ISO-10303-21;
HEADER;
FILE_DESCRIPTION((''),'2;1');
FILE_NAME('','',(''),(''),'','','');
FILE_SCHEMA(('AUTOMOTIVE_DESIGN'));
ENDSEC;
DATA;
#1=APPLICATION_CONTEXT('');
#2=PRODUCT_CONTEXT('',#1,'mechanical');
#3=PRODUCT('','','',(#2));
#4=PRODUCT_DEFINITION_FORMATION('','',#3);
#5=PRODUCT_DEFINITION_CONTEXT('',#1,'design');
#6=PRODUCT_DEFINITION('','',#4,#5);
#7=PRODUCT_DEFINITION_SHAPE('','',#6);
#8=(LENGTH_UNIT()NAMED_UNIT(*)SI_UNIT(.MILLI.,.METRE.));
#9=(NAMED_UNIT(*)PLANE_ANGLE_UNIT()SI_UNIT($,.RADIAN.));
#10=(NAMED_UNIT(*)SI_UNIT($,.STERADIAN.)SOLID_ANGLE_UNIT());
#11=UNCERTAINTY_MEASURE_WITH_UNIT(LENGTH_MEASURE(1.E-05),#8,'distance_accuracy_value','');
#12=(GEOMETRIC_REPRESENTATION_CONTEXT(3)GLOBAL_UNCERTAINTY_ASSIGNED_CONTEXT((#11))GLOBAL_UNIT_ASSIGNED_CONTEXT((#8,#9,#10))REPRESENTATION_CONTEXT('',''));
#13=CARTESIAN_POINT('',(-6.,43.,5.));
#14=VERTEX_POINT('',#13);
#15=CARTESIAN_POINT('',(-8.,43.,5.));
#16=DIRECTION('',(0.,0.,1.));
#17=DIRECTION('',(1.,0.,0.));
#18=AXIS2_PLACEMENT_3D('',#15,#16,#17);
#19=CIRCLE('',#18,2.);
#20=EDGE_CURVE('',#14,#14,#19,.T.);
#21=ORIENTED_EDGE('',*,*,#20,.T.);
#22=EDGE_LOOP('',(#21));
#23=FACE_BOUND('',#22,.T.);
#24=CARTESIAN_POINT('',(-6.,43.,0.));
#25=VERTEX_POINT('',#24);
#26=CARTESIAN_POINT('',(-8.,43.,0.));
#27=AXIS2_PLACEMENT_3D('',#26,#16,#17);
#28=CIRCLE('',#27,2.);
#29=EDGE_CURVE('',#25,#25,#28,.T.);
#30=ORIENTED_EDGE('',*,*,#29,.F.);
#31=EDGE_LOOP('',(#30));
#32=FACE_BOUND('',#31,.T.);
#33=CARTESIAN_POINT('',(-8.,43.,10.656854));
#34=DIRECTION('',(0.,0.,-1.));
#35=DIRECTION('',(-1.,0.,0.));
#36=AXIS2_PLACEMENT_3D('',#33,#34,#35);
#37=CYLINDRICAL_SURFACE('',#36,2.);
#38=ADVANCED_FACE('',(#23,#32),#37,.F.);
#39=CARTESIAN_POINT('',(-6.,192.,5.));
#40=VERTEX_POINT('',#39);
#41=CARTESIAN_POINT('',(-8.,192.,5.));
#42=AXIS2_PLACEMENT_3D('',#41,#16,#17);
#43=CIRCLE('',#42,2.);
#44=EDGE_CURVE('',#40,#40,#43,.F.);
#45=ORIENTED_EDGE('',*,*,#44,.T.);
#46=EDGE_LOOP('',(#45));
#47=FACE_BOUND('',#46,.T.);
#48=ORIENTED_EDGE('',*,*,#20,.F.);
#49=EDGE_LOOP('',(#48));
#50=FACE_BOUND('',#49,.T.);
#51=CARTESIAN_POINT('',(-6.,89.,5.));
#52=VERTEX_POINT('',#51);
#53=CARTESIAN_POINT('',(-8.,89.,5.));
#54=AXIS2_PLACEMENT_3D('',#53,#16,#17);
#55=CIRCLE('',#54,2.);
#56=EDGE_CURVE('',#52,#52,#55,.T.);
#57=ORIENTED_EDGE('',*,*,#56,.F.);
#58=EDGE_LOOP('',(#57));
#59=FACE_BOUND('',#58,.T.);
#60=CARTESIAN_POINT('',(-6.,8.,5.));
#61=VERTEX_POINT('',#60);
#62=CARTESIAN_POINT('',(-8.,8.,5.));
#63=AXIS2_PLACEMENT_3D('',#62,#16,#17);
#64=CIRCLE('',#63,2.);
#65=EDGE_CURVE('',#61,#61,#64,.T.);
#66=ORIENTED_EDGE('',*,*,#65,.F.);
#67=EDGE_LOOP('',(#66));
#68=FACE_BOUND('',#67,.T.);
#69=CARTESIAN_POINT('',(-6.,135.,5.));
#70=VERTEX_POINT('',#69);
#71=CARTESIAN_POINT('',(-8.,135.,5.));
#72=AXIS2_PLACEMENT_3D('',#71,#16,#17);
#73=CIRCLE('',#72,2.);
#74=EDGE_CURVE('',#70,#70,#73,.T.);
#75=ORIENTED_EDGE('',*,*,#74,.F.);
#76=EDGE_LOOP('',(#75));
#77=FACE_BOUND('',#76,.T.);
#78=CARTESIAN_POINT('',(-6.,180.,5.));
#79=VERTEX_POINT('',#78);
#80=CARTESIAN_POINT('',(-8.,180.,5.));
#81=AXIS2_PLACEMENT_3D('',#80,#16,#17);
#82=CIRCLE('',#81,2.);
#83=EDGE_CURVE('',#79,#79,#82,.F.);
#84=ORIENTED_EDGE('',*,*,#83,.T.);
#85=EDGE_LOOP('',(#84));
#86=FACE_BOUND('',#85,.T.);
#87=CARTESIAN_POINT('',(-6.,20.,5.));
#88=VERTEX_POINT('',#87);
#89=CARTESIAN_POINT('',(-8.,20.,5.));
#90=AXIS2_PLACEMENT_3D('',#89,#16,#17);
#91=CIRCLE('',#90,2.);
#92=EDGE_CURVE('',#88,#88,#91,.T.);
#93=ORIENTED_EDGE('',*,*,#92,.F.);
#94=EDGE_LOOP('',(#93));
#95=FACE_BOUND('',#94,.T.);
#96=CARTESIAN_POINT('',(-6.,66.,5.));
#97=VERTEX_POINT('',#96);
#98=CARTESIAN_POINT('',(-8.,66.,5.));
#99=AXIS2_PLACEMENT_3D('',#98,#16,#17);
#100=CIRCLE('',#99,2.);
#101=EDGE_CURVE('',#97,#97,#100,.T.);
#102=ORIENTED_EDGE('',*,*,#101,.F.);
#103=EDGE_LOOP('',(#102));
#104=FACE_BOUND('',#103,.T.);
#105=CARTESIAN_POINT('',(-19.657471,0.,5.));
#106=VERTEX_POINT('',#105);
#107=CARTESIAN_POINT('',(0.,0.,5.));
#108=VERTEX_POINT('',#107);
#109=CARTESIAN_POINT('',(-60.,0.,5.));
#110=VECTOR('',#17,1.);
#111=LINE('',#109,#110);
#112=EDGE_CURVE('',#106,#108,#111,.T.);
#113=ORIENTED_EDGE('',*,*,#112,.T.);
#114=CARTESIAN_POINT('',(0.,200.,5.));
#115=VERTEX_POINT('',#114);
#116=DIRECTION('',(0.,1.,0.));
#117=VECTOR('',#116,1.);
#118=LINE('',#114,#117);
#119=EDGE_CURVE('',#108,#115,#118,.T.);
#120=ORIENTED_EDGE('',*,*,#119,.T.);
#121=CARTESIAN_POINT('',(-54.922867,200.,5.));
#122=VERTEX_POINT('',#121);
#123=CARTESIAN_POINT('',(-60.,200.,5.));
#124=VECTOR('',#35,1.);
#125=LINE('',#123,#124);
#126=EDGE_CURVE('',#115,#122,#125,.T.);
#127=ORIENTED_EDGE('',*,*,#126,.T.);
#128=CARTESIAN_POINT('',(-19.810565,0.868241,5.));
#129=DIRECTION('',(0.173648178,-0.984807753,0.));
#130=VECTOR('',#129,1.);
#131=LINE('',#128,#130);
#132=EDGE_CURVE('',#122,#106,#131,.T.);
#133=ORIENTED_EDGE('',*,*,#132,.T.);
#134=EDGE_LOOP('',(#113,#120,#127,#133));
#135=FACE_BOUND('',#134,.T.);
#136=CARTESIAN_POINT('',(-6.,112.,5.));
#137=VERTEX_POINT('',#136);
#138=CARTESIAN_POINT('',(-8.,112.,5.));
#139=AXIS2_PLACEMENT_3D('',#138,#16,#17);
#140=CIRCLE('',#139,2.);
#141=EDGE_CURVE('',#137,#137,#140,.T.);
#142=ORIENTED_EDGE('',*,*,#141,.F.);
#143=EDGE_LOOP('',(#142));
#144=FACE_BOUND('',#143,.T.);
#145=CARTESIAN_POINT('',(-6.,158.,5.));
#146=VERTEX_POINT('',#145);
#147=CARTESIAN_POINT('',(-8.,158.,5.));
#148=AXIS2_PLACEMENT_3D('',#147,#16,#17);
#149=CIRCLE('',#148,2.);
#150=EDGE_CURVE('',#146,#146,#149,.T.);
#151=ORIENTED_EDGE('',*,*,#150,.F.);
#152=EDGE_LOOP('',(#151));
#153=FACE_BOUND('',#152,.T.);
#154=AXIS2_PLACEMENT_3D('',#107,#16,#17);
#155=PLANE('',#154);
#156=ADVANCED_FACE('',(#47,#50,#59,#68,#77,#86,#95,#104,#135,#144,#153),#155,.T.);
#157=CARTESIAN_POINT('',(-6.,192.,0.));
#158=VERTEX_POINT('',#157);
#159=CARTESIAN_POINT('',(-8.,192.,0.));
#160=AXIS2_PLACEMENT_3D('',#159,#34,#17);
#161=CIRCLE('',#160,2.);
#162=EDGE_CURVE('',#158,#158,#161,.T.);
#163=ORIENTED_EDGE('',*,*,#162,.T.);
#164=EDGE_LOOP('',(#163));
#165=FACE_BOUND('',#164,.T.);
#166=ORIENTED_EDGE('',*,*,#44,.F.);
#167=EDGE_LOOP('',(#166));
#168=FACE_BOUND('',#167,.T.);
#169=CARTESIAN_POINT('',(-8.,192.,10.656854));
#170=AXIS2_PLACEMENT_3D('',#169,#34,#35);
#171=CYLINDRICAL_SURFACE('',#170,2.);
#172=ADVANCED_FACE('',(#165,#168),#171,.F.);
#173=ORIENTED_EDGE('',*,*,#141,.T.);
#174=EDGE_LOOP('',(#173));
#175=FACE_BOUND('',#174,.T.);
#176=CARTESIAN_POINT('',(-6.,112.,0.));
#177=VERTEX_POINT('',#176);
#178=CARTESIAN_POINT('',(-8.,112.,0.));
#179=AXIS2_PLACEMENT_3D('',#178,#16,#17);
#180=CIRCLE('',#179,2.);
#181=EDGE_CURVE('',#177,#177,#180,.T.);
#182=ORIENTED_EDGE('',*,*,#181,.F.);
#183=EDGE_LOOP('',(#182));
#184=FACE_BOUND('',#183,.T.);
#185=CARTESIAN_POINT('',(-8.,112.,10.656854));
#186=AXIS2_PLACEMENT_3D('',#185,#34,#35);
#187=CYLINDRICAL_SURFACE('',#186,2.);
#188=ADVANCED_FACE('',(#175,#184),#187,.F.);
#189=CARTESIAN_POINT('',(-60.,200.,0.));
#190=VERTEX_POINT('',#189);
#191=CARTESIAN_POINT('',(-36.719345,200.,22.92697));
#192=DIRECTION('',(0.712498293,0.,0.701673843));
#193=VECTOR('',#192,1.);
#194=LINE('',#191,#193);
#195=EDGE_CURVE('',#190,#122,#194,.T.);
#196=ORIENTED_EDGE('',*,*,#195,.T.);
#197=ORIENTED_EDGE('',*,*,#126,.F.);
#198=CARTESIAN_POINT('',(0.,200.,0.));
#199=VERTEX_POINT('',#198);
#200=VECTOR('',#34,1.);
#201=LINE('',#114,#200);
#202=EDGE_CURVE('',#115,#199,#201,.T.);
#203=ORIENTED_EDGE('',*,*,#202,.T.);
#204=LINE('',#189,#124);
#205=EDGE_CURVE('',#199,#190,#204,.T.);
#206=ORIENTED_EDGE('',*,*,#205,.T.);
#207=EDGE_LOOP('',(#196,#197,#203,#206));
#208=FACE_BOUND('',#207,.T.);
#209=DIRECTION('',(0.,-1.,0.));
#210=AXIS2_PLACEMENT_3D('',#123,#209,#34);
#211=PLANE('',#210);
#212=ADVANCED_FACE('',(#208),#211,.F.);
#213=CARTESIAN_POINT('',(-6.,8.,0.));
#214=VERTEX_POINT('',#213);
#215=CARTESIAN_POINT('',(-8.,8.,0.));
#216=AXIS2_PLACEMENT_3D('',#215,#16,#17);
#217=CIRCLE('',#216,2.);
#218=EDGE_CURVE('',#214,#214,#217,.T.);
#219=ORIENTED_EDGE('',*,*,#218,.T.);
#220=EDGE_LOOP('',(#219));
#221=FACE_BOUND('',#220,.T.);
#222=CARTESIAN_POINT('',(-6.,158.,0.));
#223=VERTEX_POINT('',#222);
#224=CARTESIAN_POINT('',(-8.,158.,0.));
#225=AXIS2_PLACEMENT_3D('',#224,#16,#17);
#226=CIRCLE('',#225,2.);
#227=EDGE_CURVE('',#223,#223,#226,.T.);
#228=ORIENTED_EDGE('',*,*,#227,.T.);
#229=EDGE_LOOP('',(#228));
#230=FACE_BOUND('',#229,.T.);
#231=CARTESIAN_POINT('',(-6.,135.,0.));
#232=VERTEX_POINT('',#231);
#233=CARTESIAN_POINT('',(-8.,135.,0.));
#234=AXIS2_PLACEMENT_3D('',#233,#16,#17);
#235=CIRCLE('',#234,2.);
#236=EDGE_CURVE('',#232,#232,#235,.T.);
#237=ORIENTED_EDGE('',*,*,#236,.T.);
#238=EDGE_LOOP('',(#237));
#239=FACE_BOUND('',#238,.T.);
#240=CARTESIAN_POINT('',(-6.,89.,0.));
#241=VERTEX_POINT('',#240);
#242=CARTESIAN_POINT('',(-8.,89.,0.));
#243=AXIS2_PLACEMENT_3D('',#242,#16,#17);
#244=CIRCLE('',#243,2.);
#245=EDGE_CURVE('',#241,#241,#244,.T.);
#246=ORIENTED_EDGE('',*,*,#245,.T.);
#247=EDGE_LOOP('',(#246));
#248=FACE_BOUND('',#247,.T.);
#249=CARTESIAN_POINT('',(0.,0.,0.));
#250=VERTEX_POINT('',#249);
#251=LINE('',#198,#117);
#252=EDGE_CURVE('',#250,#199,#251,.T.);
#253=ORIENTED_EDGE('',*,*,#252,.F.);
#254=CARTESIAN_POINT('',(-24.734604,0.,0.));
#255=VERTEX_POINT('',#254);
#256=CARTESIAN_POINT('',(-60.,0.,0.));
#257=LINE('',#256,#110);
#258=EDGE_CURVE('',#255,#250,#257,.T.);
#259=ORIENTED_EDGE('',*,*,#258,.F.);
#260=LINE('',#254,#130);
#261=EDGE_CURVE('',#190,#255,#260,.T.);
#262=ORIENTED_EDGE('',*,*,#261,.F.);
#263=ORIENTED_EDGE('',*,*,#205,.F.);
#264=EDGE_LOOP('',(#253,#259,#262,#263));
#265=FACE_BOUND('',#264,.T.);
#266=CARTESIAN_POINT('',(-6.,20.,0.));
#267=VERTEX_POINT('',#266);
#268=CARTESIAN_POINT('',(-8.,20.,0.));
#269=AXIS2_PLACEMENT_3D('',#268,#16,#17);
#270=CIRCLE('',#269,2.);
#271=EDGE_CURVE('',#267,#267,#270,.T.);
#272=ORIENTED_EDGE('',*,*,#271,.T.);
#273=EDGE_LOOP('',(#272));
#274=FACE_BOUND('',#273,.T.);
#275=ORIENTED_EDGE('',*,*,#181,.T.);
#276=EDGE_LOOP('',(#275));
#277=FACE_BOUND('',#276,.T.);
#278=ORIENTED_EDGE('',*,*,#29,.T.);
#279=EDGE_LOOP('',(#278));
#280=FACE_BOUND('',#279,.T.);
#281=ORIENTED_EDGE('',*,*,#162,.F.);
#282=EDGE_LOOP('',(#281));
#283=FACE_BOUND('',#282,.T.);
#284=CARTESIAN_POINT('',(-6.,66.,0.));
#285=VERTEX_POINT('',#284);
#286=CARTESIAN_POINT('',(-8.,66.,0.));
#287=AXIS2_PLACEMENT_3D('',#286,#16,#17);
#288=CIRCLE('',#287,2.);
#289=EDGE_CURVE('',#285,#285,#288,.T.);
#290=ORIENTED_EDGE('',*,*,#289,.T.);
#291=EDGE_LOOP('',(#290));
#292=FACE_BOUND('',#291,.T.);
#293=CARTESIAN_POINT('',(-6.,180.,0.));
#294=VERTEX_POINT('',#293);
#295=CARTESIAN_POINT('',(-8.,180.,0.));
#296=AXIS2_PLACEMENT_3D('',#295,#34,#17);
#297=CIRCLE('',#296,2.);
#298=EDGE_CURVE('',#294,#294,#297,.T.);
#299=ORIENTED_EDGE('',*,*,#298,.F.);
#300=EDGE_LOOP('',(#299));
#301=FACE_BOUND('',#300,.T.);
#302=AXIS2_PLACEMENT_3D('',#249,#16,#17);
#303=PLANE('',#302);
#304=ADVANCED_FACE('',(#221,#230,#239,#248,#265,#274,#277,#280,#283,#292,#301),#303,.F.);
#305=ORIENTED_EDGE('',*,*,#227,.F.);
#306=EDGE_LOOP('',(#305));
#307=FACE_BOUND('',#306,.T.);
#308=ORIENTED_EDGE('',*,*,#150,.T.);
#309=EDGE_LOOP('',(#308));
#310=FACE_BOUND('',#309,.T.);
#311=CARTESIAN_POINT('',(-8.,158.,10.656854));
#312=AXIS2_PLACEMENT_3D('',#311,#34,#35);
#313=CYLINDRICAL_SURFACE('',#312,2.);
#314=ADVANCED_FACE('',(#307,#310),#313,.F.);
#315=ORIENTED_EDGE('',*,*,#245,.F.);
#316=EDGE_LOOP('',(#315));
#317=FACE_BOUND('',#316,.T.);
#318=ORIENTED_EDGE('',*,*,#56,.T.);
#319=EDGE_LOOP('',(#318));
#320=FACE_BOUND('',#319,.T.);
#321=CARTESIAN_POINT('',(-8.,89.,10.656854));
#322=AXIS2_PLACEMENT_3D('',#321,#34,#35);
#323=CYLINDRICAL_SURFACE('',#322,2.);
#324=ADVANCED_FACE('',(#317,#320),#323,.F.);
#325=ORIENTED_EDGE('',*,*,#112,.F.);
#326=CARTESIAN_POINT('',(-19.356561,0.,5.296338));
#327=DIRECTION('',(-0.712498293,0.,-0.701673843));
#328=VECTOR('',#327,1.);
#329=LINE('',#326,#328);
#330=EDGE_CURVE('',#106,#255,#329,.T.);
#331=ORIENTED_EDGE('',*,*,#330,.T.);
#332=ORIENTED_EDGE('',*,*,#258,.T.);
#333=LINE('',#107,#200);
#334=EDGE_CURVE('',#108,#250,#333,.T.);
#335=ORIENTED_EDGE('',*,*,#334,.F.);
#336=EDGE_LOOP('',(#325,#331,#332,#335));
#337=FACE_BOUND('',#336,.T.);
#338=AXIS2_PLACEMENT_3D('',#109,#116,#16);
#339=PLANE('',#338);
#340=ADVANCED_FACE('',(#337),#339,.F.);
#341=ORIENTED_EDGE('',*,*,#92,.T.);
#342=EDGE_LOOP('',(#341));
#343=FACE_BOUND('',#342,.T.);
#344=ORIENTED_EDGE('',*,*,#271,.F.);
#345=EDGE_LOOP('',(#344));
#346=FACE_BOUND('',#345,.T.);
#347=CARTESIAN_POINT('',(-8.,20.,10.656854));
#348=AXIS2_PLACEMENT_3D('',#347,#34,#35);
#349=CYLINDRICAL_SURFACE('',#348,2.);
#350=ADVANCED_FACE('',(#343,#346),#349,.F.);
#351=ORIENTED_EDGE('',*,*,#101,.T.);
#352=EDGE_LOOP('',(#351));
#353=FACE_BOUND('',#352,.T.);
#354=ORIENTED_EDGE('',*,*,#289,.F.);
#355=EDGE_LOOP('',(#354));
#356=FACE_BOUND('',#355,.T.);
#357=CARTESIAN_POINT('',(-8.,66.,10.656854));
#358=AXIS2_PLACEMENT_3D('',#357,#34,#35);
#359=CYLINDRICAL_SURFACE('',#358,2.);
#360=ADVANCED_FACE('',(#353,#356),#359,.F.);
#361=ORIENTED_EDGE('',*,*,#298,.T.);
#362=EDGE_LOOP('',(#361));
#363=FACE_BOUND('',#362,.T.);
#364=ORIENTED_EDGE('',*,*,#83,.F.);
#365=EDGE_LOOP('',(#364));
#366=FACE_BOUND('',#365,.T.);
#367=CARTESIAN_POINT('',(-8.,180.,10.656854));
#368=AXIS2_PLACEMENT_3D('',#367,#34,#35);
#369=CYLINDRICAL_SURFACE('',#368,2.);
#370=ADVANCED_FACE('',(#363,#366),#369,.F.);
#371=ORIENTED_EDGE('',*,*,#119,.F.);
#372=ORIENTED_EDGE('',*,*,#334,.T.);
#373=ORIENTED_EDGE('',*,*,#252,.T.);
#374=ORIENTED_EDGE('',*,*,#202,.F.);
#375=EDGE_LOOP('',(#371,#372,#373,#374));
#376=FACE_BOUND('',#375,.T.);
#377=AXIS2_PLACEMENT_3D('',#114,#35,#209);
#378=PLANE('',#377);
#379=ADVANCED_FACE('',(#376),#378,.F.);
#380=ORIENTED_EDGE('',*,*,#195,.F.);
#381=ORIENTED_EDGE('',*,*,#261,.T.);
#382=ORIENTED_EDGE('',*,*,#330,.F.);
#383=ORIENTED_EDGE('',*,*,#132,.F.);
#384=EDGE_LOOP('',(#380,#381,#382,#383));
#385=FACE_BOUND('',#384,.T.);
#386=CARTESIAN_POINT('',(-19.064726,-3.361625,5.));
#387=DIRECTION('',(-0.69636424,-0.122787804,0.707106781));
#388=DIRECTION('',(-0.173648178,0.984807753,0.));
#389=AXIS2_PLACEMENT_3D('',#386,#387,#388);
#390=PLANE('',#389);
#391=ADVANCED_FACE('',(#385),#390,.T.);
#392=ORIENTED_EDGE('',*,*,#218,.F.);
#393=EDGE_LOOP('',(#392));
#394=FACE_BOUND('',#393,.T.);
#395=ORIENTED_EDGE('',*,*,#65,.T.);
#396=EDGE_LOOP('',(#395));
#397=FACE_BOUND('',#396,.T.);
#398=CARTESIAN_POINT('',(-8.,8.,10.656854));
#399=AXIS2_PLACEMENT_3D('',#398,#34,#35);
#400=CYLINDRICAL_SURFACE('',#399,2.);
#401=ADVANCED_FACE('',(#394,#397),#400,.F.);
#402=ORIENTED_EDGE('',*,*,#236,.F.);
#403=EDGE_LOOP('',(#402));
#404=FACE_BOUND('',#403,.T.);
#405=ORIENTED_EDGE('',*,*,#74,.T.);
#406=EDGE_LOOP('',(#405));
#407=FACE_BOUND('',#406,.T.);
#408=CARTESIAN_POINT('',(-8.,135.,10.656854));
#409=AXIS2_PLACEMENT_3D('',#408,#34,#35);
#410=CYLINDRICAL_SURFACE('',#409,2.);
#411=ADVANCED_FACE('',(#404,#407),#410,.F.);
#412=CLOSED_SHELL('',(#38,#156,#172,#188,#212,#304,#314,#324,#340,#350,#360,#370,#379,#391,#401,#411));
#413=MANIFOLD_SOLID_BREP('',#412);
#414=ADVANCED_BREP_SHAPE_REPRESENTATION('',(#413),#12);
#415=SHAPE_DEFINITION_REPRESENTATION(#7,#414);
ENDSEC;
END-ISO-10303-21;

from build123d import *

# Parameters (mm, degrees)
SKETCH1_W              = 60
SKETCH1_H              = 200
BOSS_EXTRUDE1_DEPTH    = 5
SKETCH6_R              = 2
CUT_EXTRUDE3_DEPTH     = 5
SKETCH7_R              = 2
CUT_EXTRUDE4_DEPTH     = 5
LPATTERN1_COUNT        = 6
LPATTERN1_PITCH        = 23
CUT_EXTRUDE_1312_DEPTH = 5
CHAMFER_1373_SIZE      = 5


with BuildPart() as part:
    # Sketch1 → Boss-Extrude1 (new body)
    with BuildSketch(Plane.XY):
        with Locations((-30, 100)):
            Rectangle(SKETCH1_W, SKETCH1_H)
    extrude(amount=BOSS_EXTRUDE1_DEPTH)

    # Sketch6 → Cut-Extrude3 (cut)
    with BuildSketch(Plane.XY):
        with Locations((-8, 8)):
            Circle(SKETCH6_R)
        with Locations((-8, 20)):
            Circle(SKETCH6_R)
    cut_extrude3 = extrude(amount=CUT_EXTRUDE3_DEPTH, mode=Mode.SUBTRACT)

    # Mirror1: Cut-Extrude3 across plane
    add(cut_extrude3.mirror(Plane.ZX.offset(100)), mode=Mode.SUBTRACT)

    # Sketch7 → Cut-Extrude4 (cut)
    with BuildSketch(Plane.XY):
        with Locations((-8, 43)):
            Circle(SKETCH7_R)
    cut_extrude4 = extrude(amount=CUT_EXTRUDE4_DEPTH, mode=Mode.SUBTRACT)

    # LPattern1: Cut-Extrude4 ×6
    with Locations(*[(0, i * LPATTERN1_PITCH, 0) for i in range(1, LPATTERN1_COUNT)]):
        add(cut_extrude4, mode=Mode.SUBTRACT)

    # Sketch3 → Cut-Extrude 1312 (cut)
    with BuildSketch(Plane(origin=(-200, 0, 0), x_dir=(-1, 0, 0), z_dir=(0, 0, -1))):
        Polygon((-140, 0), (-175.265396142, 0), (-140, 200), align=None)
    extrude(amount=-CUT_EXTRUDE_1312_DEPTH, mode=Mode.SUBTRACT)

    # Chamfer 1373
    chamfer_1373_edges = [part.edges().sort_by_distance(p)[0] for p in [
        (-42.367301929, 100, 5),
    ]]
    chamfer(chamfer_1373_edges, length=CHAMFER_1373_SIZE - 0.0001)  # a hair under: the kernel refuses the full size


solid = part.part
